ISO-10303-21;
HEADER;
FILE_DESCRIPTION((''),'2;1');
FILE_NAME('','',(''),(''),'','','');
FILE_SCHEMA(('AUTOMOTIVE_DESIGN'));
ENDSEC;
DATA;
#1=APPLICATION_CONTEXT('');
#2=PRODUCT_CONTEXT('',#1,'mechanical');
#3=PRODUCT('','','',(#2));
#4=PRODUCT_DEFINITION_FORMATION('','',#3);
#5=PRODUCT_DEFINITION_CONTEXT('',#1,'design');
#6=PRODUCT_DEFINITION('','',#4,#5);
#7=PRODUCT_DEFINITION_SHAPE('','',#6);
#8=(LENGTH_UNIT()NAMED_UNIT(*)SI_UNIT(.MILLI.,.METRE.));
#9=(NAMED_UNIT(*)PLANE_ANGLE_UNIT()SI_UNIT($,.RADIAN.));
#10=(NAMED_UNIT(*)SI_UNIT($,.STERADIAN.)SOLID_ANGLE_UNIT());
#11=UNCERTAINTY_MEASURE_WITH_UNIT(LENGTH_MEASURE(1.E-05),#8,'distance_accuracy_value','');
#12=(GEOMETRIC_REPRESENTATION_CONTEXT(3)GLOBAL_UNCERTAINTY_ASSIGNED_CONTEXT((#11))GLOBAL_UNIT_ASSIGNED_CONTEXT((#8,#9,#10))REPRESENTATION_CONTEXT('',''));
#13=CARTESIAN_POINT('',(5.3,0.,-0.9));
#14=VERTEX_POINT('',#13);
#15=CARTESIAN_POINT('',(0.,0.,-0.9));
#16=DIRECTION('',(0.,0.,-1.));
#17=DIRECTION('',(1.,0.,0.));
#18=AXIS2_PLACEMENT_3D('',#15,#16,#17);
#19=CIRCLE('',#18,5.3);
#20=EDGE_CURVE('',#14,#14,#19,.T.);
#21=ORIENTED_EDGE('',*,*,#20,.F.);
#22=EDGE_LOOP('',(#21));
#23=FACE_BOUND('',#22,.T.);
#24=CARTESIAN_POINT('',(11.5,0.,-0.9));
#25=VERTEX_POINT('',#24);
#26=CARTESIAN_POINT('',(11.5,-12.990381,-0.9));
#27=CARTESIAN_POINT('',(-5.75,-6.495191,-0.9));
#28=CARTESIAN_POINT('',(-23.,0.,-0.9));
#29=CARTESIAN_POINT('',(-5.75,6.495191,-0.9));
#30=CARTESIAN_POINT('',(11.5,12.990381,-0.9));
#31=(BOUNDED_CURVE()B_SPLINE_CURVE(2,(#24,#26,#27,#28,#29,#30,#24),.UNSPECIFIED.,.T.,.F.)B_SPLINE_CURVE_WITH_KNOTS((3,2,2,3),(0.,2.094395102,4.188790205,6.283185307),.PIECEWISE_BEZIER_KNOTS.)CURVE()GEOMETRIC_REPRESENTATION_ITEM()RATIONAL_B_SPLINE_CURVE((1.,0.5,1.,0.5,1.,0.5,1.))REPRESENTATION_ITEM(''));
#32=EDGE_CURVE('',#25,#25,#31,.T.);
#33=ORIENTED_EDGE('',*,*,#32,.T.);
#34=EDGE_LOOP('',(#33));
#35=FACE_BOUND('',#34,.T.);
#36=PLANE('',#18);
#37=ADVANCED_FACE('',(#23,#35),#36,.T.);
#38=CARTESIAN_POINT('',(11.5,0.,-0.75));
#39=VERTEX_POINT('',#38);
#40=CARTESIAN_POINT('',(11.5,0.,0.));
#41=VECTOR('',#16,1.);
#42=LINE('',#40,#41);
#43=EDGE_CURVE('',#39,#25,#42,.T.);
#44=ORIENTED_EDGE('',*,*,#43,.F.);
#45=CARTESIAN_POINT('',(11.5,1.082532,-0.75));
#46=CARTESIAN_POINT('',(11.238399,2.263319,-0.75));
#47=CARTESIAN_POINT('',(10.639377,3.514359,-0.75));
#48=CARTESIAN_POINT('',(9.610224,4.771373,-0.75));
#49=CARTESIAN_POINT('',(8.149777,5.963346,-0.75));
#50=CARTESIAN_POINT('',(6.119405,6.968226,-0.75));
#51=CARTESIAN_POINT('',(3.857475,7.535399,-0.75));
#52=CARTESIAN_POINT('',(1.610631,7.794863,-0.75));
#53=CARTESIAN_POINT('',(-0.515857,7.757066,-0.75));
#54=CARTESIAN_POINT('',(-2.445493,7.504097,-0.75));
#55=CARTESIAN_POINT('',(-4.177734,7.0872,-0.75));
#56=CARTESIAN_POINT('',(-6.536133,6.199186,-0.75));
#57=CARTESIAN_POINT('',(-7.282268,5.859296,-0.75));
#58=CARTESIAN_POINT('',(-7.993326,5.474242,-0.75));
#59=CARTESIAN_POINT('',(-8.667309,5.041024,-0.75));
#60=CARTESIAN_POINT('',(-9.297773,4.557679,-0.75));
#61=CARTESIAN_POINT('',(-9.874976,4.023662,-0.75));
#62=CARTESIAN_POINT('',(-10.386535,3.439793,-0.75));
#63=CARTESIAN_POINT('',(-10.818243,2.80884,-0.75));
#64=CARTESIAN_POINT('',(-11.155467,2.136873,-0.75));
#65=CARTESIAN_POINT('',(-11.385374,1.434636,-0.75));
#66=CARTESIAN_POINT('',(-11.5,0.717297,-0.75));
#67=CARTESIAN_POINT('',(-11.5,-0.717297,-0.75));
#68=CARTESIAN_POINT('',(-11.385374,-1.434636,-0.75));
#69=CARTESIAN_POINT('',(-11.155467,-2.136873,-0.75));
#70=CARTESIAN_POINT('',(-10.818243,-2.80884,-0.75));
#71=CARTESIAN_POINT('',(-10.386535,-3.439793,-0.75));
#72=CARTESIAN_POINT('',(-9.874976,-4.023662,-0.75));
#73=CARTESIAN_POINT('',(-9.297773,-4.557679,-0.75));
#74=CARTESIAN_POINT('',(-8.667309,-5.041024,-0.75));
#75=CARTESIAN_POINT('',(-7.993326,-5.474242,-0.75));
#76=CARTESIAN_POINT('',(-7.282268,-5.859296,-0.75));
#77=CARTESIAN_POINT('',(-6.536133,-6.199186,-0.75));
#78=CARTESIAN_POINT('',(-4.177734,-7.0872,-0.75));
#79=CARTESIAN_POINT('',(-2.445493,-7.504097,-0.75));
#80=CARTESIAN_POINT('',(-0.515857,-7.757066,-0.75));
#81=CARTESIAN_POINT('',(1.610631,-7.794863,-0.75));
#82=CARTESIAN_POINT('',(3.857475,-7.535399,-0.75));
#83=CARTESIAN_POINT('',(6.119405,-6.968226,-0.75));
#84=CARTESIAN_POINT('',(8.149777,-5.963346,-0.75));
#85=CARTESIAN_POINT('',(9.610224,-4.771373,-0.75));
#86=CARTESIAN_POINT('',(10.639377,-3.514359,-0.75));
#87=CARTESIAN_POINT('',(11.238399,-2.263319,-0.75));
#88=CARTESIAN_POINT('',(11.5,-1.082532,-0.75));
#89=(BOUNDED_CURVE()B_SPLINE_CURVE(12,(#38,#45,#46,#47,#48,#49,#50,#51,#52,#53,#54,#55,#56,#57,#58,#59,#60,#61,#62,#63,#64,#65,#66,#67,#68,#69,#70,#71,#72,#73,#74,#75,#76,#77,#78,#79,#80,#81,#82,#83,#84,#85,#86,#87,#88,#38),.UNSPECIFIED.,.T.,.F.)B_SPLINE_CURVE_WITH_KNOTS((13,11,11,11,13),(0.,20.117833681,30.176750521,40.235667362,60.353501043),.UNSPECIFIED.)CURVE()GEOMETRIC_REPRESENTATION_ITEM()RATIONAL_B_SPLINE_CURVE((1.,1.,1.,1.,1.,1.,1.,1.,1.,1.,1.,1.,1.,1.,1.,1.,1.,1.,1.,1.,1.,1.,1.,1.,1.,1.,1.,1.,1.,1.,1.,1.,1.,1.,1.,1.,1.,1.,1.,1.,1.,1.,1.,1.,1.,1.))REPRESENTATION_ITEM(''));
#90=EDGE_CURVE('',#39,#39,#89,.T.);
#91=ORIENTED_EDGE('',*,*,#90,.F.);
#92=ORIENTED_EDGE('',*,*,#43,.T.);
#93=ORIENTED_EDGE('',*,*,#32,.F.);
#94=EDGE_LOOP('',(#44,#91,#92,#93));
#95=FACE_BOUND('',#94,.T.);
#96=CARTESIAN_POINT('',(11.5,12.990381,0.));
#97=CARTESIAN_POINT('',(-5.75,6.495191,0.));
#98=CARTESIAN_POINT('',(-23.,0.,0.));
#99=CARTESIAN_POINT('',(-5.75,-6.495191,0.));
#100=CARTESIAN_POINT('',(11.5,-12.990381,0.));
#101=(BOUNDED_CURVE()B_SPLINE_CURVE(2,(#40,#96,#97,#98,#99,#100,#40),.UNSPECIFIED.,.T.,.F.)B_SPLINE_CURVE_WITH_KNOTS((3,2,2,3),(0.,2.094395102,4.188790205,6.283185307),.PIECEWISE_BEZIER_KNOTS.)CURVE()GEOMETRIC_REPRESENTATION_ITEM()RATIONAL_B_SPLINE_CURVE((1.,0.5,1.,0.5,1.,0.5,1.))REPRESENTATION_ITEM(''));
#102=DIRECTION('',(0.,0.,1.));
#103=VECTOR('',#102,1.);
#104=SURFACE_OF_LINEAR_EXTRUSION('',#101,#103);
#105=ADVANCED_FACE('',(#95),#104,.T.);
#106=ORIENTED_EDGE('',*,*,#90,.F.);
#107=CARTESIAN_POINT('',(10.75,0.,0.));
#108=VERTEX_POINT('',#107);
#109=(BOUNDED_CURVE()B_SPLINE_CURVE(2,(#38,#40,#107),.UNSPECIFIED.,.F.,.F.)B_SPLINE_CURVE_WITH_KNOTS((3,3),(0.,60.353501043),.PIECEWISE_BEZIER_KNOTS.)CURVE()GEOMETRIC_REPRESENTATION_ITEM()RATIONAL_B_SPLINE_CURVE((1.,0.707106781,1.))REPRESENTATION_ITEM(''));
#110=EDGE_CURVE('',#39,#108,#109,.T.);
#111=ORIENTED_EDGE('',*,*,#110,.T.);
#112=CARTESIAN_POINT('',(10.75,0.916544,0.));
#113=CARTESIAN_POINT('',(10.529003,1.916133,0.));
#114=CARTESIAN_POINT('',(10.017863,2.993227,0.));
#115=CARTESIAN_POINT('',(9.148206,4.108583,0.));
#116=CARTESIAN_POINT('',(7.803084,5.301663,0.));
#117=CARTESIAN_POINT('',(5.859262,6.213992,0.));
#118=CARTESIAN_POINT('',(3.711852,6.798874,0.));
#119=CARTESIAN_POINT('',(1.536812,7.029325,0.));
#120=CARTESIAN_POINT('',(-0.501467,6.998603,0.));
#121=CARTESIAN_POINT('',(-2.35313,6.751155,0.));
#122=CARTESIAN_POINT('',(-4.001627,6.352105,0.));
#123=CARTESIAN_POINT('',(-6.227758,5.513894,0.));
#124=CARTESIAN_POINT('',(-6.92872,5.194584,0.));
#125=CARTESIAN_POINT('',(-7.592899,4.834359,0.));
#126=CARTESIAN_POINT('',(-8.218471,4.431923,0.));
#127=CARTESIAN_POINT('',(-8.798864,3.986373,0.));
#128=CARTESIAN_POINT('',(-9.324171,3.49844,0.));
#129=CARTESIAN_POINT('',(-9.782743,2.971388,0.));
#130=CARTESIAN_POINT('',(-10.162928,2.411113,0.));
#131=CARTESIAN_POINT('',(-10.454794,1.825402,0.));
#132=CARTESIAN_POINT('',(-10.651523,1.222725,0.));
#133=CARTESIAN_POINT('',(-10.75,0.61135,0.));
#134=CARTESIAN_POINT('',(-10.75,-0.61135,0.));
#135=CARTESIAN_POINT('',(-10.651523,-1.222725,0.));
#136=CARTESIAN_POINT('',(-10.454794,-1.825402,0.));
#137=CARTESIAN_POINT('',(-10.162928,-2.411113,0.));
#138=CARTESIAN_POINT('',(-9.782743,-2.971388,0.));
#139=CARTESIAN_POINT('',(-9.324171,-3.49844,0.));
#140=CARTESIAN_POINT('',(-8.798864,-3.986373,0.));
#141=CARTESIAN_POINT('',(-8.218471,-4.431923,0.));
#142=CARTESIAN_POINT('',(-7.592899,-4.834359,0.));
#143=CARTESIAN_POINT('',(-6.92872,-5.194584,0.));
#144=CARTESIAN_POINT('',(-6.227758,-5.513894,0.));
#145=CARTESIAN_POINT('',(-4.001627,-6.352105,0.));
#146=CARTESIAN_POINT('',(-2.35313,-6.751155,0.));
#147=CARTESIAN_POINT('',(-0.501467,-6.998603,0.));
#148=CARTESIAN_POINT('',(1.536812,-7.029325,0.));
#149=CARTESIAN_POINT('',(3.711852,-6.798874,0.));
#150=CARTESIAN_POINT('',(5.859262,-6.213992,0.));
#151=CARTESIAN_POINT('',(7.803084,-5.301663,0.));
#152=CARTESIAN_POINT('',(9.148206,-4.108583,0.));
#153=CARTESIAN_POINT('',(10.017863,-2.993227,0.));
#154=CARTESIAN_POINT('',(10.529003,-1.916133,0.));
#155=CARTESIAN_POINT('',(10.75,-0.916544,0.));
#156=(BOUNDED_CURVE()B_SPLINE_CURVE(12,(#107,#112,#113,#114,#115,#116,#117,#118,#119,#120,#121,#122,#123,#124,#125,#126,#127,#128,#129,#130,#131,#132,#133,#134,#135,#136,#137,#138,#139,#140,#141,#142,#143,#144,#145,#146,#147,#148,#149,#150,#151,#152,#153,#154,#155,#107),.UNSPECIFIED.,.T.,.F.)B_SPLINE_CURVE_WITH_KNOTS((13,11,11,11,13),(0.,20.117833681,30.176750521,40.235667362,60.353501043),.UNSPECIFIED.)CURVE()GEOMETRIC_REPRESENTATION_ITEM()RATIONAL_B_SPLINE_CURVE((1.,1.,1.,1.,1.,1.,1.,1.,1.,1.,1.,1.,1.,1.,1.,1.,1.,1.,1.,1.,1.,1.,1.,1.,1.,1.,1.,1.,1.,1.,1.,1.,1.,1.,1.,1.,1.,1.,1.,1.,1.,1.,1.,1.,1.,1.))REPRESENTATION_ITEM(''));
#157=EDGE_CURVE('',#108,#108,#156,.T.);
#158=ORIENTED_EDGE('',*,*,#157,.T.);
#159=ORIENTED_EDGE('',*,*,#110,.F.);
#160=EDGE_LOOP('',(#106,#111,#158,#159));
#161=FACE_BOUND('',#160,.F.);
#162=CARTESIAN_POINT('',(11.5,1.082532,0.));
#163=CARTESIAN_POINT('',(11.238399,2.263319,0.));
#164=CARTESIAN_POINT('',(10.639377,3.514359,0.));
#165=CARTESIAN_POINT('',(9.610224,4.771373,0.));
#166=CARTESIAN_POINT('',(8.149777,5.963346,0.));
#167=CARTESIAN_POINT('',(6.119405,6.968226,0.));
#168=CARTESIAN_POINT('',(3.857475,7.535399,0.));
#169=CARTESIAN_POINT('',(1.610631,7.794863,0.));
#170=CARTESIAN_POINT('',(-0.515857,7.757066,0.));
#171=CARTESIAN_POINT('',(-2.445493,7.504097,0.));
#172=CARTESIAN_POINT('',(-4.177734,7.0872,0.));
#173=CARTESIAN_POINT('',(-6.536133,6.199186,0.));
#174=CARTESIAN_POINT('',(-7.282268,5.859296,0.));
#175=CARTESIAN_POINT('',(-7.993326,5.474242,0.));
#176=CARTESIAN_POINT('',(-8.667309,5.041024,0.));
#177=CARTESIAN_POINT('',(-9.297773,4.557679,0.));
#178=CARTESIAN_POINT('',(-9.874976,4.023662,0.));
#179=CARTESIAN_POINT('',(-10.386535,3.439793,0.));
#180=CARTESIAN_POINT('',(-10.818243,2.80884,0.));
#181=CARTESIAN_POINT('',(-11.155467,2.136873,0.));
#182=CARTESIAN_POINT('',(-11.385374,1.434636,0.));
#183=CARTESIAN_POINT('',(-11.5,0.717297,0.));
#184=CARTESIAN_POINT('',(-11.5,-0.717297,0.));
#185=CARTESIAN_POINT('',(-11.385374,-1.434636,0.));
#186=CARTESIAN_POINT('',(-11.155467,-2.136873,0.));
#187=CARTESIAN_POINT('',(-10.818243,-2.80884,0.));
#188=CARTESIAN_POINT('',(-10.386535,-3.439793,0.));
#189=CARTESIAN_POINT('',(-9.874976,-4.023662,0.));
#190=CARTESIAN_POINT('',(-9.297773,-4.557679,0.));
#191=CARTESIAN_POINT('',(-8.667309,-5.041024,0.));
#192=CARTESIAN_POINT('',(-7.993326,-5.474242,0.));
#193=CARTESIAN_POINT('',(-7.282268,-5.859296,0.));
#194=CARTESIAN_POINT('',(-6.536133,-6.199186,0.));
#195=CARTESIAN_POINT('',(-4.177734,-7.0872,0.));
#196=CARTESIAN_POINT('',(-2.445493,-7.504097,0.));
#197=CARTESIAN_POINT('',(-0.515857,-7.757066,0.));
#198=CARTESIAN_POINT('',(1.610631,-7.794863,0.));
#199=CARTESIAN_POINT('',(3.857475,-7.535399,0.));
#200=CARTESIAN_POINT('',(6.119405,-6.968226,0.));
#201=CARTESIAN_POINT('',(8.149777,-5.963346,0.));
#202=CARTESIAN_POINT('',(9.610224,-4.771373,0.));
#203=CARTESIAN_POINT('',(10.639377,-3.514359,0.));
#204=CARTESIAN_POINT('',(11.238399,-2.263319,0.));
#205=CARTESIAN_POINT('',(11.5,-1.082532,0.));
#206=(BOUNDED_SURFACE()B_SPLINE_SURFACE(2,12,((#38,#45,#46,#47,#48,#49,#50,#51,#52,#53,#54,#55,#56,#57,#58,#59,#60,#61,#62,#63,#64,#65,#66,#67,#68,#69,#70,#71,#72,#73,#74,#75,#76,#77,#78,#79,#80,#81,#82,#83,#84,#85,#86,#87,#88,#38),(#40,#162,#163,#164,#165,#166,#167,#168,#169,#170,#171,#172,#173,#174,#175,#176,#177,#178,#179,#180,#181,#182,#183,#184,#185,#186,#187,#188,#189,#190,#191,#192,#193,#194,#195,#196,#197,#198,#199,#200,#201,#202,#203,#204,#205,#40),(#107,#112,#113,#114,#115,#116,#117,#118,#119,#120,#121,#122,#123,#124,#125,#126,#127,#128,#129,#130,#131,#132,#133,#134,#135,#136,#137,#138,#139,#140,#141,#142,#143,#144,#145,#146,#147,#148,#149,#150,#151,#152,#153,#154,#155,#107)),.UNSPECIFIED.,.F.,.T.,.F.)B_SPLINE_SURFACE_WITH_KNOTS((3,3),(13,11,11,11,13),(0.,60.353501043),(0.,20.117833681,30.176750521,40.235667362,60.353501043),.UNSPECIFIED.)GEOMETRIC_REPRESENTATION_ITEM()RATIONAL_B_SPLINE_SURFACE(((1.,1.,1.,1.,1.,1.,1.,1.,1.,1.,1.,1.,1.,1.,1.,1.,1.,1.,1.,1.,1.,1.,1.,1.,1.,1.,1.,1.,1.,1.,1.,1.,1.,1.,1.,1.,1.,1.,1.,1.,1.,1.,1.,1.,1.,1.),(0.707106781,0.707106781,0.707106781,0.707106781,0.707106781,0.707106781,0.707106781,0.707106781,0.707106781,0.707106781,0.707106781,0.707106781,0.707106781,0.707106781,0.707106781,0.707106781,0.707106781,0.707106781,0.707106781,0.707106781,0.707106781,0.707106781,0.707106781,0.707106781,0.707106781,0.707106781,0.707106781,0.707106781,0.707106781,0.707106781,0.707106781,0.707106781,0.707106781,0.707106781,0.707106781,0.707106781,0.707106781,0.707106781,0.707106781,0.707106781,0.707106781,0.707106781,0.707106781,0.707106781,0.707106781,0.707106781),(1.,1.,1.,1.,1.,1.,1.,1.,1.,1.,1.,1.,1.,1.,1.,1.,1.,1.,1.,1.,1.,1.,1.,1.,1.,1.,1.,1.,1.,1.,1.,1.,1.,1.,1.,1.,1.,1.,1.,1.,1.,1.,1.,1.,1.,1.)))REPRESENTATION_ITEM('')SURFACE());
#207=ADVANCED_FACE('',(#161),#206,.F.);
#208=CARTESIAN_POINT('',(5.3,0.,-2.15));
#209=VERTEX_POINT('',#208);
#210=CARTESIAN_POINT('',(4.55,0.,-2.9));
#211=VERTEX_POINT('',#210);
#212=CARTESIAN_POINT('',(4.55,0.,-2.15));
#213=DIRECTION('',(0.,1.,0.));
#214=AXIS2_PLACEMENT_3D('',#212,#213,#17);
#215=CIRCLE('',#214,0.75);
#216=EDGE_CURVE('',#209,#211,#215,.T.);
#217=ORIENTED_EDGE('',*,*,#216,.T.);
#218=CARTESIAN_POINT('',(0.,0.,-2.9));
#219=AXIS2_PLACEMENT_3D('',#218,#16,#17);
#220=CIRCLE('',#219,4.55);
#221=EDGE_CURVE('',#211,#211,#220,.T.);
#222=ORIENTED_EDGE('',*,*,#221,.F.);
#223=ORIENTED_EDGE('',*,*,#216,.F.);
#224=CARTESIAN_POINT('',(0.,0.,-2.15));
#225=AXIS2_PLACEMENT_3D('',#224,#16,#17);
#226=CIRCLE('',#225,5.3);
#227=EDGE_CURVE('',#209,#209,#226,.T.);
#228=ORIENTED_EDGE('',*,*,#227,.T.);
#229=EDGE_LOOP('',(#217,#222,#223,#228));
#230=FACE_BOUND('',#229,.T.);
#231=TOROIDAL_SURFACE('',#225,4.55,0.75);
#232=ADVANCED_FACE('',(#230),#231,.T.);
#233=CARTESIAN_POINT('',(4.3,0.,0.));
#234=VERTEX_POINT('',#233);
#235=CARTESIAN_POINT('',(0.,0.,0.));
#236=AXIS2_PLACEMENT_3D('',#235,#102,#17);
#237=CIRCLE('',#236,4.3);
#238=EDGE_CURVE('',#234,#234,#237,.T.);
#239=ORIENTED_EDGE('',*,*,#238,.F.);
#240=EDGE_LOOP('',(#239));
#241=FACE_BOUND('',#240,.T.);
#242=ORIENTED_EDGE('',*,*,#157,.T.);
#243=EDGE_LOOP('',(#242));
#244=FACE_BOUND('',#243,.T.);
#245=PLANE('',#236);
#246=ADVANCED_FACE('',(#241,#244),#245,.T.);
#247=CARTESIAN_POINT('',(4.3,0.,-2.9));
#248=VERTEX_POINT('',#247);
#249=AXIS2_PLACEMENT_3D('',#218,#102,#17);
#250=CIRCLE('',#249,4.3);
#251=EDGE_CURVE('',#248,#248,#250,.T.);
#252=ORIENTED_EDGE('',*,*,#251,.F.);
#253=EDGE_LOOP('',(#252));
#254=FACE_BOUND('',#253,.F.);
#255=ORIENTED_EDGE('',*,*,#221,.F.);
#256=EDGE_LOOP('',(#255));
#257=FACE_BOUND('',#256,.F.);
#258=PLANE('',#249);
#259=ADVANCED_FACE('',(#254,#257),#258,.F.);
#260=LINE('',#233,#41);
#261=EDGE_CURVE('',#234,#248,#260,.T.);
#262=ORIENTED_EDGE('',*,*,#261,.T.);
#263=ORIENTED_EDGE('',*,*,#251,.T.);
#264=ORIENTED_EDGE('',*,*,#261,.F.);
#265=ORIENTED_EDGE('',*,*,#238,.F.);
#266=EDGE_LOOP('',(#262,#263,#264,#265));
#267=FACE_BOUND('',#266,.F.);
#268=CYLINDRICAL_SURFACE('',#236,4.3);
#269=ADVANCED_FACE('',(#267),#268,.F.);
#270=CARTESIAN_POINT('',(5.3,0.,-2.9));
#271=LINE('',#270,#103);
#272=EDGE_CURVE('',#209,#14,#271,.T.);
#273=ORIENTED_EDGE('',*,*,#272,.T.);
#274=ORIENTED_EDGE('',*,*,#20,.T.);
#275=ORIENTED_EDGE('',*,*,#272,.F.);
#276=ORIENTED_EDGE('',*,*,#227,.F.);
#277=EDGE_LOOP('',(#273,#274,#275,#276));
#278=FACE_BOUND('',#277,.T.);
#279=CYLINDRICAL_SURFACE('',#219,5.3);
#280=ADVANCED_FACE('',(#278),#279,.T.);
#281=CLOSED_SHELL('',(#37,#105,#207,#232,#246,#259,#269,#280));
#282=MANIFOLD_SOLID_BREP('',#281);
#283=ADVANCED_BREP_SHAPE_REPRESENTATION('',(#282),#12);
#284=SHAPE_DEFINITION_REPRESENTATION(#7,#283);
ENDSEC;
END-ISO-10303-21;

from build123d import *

# Parameters (mm, degrees)
F0_R     = 4.3
F1_DEPTH = 2.9
F2_R     = 5.3
F3_DEPTH = 2
F4_R     = 0.75


# Not quite as in the source:
# - a feature names something its author has since deleted; it is built from what else it names


with BuildPart() as f1:
    # F0 (on Top) → F1 (new body)
    with BuildSketch(Plane.XY):
        with BuildLine():
            add(Edge.make_bspline(
                [(11.5, 0), (11.5, 12.9903810568), (-5.75, 6.4951905284), (-23, 0), (-5.75, -6.4951905284), (11.5, -12.9903810568), (11.5, 0)],
                knots=[0, 0, 0, 2.0943951024, 2.0943951024, 4.1887902048, 4.1887902048, 6.2831853072, 6.2831853072, 6.2831853072], degree=2, weights=[1, 0.5, 1, 0.5, 1, 0.5, 1]))
        make_face()
        Circle(F0_R, mode=Mode.SUBTRACT)
    extrude(amount=-F1_DEPTH)

    # F2 (on face) → F3 (cut)
    with BuildSketch(Plane(origin=(0, 0, -2.9), x_dir=(1, 0, 0), z_dir=(0, 0, -1))):
        with BuildLine():
            add(Edge.make_bspline(
                [(11.5, 0), (11.5, 12.9903810568), (-5.75, 6.4951905284), (-23, 0), (-5.75, -6.4951905284), (11.5, -12.9903810568), (11.5, 0)],
                knots=[0, 0, 0, 2.0943951024, 2.0943951024, 4.1887902048, 4.1887902048, 6.2831853072, 6.2831853072, 6.2831853072], degree=2, weights=[1, 0.5, 1, 0.5, 1, 0.5, 1]))
        make_face()
        Circle(F2_R, mode=Mode.SUBTRACT)
    extrude(amount=-F3_DEPTH, mode=Mode.SUBTRACT)

    # F4
    f4_edges = [f1.edges().sort_by_distance(p)[0] for p in [
        (-11.5, 0, 0),
        (-5.3, 0, -2.9),
    ]]
    fillet(f4_edges, radius=F4_R)


solid = f1.part
